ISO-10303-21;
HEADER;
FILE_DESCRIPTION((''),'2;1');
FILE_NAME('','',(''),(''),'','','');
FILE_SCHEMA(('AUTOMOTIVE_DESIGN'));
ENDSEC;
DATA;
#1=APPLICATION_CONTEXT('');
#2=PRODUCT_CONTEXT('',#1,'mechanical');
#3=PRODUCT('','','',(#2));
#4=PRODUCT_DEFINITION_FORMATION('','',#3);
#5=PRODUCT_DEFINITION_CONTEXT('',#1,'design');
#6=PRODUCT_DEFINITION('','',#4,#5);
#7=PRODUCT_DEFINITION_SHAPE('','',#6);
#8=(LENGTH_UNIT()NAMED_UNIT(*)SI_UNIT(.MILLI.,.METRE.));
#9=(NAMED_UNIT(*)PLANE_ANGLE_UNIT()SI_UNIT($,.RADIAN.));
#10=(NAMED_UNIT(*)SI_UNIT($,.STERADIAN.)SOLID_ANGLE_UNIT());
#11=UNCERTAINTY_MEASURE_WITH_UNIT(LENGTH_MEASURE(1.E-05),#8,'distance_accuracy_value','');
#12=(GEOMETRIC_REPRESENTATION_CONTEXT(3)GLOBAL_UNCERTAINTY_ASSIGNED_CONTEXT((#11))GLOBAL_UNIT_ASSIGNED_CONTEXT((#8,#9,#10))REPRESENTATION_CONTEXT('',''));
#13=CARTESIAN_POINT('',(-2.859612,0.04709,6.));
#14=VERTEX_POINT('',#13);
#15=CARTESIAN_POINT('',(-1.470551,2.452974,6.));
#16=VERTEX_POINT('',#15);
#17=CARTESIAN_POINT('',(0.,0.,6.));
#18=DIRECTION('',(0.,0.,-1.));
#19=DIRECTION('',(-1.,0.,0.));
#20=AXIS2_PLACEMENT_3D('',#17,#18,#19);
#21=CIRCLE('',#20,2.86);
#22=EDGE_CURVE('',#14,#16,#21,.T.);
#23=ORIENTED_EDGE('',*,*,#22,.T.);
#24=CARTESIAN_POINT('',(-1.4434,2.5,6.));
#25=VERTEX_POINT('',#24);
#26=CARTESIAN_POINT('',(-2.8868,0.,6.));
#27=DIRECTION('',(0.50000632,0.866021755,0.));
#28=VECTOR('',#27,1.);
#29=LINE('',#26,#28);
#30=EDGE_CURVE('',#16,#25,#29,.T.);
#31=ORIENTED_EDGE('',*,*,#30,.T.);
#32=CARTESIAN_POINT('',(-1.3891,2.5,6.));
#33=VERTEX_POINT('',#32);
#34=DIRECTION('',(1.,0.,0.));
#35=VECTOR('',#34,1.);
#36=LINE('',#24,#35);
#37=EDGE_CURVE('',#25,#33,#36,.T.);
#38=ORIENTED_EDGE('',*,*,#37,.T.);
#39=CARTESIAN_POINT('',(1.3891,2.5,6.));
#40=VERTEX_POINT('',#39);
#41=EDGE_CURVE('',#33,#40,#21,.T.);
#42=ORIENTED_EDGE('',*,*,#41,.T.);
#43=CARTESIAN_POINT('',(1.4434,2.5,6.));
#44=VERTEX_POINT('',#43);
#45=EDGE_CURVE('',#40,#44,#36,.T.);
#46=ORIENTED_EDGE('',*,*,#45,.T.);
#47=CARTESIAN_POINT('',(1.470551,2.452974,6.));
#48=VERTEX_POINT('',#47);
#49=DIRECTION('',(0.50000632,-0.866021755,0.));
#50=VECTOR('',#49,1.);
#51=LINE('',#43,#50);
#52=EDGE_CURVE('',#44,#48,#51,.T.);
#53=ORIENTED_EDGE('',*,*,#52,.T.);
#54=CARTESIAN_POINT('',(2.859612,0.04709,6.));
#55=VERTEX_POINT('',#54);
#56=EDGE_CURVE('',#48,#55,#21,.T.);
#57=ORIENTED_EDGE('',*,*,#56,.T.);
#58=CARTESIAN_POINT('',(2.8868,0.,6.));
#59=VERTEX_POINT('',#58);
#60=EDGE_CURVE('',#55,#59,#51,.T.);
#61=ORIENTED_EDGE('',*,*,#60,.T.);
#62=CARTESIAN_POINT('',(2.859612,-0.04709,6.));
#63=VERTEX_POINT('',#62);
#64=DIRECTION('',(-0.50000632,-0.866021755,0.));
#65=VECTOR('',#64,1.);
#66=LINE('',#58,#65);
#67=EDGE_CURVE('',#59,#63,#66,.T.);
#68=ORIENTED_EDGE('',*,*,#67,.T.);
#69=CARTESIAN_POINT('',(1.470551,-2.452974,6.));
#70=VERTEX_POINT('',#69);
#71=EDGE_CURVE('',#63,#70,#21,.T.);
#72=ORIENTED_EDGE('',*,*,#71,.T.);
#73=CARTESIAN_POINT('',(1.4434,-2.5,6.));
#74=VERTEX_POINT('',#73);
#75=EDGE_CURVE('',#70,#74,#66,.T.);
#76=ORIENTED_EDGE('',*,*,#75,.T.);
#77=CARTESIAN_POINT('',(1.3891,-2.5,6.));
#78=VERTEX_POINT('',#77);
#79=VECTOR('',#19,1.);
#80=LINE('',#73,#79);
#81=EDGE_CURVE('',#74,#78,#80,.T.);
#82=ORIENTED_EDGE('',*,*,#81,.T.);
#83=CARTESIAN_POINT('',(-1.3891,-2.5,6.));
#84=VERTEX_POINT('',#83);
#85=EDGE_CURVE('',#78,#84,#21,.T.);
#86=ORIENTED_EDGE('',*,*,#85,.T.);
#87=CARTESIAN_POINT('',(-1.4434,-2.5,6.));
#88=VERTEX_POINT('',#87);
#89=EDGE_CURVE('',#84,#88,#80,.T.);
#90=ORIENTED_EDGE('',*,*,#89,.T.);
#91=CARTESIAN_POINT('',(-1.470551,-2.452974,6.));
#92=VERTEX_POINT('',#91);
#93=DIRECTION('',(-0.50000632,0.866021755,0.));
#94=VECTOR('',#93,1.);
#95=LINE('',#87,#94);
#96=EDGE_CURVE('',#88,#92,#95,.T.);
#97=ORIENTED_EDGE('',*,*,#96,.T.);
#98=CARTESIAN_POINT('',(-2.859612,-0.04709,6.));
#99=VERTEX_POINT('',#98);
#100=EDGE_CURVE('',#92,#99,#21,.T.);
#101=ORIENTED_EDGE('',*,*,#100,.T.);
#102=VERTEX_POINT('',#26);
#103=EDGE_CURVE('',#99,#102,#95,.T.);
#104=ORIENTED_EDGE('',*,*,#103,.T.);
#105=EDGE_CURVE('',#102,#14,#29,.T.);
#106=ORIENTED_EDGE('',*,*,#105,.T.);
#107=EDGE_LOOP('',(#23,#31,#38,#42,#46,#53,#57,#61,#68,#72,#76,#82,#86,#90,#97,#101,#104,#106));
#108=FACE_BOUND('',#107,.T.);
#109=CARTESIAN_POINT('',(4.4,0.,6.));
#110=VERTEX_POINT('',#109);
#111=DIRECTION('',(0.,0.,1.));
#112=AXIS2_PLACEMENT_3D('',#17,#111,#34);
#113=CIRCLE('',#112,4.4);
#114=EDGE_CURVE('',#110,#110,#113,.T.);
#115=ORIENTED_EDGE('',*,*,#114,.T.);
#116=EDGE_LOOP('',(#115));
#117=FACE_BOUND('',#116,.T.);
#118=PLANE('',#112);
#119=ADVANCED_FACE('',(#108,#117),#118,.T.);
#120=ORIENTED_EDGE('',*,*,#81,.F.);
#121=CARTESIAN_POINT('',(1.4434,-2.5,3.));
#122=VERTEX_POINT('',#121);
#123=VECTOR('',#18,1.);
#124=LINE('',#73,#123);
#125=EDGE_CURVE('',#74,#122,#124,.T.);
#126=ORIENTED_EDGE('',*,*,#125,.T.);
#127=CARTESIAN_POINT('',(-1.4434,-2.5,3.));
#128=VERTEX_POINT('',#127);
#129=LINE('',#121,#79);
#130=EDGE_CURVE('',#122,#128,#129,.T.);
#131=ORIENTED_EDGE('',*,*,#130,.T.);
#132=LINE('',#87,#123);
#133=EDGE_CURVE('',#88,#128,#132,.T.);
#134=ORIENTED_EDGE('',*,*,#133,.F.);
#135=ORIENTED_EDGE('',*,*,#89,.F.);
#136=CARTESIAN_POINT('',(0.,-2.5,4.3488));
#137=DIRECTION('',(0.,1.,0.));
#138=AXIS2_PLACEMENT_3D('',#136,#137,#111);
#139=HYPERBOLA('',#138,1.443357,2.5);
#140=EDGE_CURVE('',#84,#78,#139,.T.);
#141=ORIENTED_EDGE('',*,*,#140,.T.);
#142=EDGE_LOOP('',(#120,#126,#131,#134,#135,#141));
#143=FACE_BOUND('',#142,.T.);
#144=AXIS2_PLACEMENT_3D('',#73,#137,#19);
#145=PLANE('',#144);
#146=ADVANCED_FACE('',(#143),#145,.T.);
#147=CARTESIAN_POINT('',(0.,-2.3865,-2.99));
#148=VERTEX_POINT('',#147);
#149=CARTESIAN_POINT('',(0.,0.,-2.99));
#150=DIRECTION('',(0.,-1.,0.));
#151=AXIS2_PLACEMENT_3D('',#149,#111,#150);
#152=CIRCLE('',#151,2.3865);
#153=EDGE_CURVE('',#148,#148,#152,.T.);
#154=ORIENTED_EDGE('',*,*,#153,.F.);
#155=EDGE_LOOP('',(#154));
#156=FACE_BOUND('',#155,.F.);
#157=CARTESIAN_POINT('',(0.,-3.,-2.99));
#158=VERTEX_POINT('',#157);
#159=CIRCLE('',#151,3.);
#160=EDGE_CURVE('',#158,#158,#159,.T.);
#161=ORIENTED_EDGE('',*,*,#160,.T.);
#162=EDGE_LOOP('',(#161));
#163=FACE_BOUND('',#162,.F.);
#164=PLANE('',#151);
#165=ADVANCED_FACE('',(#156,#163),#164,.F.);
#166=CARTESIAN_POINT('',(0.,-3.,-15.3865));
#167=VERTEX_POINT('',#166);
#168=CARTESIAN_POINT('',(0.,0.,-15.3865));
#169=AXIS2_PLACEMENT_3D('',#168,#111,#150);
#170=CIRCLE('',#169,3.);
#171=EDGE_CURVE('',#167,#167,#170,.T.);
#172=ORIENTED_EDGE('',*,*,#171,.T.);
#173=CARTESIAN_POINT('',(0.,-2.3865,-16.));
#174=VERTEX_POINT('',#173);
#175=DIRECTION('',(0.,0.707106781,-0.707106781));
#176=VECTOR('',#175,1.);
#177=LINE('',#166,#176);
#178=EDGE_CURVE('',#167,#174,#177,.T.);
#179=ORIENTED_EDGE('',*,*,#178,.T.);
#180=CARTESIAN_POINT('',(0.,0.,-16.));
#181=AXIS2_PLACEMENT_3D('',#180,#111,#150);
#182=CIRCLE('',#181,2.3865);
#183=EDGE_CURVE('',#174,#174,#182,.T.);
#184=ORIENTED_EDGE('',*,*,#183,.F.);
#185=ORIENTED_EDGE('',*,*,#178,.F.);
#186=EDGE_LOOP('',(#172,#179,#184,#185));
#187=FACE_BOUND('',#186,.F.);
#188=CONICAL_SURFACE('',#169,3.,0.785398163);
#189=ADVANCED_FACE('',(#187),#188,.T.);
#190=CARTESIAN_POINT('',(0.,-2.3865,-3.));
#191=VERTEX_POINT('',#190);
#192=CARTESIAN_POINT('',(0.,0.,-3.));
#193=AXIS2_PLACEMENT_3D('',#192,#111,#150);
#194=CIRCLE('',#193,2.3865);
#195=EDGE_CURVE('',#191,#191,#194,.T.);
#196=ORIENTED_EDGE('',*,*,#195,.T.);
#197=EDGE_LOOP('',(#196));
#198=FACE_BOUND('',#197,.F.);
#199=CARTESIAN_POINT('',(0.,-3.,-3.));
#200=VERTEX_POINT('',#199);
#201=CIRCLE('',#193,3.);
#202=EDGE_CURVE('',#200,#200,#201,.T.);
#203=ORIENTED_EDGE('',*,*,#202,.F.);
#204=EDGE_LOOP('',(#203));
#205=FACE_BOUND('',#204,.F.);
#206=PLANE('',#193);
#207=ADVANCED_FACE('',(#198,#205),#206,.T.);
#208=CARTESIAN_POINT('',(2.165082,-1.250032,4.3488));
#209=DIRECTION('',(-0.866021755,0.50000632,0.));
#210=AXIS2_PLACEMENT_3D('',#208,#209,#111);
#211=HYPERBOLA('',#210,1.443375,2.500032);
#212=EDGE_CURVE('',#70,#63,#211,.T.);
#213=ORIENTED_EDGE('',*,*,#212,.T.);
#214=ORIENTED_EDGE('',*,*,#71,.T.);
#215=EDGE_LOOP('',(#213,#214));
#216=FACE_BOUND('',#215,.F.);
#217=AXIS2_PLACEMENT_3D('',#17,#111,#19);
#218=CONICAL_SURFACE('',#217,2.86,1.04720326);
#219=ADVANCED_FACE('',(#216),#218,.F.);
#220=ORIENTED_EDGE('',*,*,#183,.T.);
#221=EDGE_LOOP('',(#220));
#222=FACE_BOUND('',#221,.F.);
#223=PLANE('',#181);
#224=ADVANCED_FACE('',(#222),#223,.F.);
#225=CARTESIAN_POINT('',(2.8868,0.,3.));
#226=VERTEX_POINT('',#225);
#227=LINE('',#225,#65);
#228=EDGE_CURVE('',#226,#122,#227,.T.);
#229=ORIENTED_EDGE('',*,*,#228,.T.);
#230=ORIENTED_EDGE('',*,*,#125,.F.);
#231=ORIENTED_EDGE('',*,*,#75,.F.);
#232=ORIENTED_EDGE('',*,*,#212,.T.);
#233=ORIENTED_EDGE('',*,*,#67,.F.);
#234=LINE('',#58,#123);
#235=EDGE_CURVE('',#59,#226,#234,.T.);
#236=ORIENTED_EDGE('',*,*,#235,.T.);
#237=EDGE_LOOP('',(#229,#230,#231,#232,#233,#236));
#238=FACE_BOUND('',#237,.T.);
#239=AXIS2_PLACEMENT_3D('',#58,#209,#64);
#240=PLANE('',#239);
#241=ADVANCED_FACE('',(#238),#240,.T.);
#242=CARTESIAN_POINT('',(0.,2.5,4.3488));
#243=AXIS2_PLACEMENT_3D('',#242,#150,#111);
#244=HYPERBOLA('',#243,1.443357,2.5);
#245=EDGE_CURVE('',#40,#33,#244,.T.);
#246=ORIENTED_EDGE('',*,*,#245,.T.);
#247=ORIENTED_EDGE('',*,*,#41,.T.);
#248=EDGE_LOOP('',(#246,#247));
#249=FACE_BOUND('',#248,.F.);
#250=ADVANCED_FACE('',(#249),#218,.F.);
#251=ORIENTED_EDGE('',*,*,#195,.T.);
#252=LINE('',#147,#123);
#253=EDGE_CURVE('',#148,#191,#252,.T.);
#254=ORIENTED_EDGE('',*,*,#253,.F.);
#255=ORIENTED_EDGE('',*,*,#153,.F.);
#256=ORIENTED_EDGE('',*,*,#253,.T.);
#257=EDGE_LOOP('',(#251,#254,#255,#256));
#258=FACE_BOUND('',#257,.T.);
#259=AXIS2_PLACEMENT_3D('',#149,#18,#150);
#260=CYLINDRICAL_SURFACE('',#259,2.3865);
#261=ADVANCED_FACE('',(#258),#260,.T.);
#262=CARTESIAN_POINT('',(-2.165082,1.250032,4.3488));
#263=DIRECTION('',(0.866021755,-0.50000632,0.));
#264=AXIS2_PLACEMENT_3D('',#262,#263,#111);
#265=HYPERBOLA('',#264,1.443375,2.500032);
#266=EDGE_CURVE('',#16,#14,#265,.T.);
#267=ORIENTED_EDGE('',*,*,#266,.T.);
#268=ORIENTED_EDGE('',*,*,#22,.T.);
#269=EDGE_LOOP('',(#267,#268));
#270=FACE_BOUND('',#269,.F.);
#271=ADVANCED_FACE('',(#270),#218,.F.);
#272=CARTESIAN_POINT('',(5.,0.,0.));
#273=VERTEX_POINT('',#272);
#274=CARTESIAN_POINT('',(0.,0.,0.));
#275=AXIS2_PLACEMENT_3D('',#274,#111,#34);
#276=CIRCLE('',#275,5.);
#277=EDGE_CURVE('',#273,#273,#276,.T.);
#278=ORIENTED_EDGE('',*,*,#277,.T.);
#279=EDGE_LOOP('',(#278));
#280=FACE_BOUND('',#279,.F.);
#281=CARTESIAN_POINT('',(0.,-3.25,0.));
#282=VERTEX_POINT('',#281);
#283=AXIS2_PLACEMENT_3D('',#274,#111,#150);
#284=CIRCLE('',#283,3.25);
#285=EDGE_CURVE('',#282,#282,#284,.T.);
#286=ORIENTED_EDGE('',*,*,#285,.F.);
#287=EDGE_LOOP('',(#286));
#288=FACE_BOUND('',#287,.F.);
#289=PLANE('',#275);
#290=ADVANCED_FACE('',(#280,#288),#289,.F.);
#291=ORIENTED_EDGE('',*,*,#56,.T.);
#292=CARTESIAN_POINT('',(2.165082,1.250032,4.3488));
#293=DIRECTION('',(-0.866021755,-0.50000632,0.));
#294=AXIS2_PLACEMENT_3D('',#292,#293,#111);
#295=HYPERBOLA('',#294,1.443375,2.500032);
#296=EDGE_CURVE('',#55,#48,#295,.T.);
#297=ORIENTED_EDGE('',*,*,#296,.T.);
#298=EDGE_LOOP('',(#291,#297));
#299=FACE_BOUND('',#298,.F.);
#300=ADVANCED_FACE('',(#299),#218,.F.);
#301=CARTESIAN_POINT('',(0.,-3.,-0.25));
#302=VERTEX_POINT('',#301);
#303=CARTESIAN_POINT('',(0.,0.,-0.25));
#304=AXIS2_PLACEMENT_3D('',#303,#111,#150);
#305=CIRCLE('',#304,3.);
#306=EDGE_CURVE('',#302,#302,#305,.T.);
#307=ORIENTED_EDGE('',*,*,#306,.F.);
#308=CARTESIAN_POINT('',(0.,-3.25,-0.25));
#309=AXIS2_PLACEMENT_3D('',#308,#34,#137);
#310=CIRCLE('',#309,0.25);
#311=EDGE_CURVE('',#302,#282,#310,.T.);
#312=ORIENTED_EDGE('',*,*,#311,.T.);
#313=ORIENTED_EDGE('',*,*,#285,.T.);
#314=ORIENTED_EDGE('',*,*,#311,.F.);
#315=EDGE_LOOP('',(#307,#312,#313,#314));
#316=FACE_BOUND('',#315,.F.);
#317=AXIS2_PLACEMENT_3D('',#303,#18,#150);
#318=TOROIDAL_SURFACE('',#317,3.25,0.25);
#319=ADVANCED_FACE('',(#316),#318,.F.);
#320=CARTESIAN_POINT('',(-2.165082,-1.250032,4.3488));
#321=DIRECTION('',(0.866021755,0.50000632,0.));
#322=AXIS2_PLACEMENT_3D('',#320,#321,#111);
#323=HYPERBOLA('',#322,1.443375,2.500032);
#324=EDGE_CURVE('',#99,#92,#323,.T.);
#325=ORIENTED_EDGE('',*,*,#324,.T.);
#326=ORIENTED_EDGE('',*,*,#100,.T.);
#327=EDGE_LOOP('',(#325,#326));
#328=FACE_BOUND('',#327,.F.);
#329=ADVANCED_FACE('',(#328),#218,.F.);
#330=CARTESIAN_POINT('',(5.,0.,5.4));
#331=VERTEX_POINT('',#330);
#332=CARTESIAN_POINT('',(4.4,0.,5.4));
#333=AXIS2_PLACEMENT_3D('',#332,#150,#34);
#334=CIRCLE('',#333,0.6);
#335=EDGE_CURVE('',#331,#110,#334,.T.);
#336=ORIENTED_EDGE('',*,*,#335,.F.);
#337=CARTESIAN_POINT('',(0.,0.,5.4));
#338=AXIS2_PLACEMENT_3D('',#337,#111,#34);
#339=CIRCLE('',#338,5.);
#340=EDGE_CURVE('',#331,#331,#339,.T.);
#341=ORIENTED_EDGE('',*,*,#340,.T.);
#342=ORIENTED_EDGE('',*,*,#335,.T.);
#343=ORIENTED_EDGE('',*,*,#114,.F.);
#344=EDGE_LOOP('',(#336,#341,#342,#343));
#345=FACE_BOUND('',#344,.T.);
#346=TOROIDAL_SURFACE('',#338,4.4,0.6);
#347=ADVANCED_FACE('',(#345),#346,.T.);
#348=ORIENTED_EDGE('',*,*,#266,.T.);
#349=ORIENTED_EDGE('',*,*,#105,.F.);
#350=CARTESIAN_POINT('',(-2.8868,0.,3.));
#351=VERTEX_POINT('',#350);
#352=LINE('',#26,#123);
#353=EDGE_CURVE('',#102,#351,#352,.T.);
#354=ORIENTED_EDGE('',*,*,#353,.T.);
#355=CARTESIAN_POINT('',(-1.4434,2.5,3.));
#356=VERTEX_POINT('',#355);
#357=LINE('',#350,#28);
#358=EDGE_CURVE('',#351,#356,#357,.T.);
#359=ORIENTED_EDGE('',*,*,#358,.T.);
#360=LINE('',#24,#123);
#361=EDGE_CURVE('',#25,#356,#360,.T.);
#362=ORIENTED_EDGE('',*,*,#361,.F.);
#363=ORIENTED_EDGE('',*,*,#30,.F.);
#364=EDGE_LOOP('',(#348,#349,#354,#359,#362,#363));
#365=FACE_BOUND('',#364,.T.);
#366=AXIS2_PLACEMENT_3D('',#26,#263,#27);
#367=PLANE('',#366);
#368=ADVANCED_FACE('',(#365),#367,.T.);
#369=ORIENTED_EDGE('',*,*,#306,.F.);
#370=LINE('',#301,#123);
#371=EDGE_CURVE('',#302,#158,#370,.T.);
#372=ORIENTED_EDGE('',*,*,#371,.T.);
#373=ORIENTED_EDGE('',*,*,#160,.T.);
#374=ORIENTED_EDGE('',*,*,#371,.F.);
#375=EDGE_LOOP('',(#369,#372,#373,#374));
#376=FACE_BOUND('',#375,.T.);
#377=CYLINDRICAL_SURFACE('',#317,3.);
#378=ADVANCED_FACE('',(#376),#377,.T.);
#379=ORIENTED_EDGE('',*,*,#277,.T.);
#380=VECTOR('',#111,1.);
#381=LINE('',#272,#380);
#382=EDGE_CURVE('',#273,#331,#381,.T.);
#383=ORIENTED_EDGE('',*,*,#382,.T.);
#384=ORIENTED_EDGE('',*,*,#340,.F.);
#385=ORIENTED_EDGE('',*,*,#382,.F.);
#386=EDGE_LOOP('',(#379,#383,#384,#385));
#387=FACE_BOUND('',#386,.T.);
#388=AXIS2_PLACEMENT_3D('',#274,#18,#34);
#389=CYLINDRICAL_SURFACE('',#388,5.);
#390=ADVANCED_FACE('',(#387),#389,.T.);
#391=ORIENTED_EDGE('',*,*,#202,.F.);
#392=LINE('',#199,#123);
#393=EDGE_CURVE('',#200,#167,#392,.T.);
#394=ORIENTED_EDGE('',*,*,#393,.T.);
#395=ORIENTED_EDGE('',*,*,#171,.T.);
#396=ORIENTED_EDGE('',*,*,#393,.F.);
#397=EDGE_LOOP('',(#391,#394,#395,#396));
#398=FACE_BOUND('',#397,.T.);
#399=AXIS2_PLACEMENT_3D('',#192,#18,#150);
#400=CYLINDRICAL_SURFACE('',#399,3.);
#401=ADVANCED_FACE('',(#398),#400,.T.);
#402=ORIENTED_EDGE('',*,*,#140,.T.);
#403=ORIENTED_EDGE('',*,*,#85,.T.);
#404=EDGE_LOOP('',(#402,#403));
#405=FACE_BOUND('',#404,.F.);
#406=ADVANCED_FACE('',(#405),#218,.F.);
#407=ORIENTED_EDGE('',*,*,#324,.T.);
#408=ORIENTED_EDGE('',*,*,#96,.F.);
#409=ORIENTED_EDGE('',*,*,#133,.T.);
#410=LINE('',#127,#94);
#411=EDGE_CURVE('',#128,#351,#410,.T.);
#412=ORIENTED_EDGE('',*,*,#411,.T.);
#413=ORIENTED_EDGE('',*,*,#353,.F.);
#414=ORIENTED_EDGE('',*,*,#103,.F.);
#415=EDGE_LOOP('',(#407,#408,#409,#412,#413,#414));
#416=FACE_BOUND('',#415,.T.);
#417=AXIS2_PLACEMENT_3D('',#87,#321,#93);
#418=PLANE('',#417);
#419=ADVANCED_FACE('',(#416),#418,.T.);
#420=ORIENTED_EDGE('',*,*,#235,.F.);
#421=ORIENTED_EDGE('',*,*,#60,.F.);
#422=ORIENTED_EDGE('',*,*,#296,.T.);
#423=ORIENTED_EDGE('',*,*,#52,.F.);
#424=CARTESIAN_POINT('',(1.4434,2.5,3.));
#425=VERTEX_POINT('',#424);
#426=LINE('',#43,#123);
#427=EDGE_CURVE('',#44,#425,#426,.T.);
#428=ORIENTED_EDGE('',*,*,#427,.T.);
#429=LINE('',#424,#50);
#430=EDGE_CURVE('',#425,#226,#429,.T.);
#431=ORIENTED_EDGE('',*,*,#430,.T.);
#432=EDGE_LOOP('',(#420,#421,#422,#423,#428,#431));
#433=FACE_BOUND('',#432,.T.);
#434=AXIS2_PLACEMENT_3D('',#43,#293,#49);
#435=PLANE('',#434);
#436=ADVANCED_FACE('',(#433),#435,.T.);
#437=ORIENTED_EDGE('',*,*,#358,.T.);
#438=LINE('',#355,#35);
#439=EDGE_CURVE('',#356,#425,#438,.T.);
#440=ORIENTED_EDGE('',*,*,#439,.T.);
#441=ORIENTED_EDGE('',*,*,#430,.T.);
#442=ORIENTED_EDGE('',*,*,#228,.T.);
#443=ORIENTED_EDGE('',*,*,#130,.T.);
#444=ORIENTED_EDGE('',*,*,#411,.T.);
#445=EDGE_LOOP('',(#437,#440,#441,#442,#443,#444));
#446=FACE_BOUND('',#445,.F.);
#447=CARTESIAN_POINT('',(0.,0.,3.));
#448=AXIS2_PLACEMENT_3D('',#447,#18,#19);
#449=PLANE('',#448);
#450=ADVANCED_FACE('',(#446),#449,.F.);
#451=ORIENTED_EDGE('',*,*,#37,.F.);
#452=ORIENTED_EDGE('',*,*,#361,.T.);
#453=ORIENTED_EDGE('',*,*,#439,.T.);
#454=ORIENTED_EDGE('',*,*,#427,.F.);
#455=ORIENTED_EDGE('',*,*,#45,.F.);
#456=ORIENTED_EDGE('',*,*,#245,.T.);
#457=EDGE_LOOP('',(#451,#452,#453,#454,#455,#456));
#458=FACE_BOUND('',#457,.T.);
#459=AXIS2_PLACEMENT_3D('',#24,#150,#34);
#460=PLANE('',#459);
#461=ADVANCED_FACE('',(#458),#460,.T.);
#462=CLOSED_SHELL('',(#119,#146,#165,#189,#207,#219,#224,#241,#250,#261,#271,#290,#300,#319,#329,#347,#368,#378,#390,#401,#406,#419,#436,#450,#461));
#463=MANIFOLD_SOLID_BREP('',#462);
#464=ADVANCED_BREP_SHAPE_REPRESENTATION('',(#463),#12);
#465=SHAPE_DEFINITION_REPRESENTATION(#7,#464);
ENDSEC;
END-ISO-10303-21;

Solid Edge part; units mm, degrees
sketch "Sketch1" plane through (0, 0, 0) normal (0, 0, 1) x (1, 0, 0)
  circle A0 centre (0, 0) radius 5
extrude "Protrusion1" add sketch "Sketch1" along normal blind 6
sketch "Sketch2" plane through (0, 0, 6) normal (0, 0, 1) x (0, 1, 0)
  line L0 (0, 2.8868) -> (2.5, 1.4434)
  line L1 (2.5, 1.4434) -> (2.5, -1.4434)
  line L2 (2.5, -1.4434) -> (0, -2.8868)
  line L3 (0, -2.8868) -> (-2.5, -1.4434)
  line L4 (-2.5, -1.4434) -> (-2.5, 1.4434)
  line L5 (-2.5, 1.4434) -> (0, 2.8868)
extrude "Cutout1" cut sketch "Sketch2" against normal blind 3
fillet "Round1" radius 0.6 1 edges at (-5, 0, 6)
sketch "Sketch3" plane through (0, 0, 0) normal (1, 0, 0) x (0, 1, 0)
  line L0 (-2.3865, -16) -> (0, -16)
  line L1 (-3, -15.3865) -> (-2.3865, -16)
  line L2 (-3, -3) -> (-3, -15.3865)
  line L3 (-2.3865, -3) -> (-3, -3)
  line L4 (-2.3865, -2.99) -> (-2.3865, -3)
  line L5 (-3, -2.99) -> (-2.3865, -2.99)
  line L6 (-3, -0.25) -> (-3, -2.99)
  arc A0 (-3, -0.25) -> (-3.25, 0) centre (-3.25, -0.25) ccw
  dimension "D1" = 3
  dimension "D2" = 0.01
  dimension "D3" = 0.25
  dimension "D4" = 16
revolve "RevolvedProtrusion1" add sketch "Sketch3" angle 360 about axis through (0, 0, -60.325) along (0, 0, 1) material side at (0, -1.1932, -15.95)
cosmetic_thread "Thread1"
sketch "Sketch4" plane through (0, 0, 0) normal (0, -1, 0) x (1, 0, 0)
  line L0 (-2.86, 6) -> (0, 4.3488)
revolve "RevolvedCutout1" cut sketch "Sketch4" angle 360 about axis through (0, 0, 57.15) along (0, 0, -1) material side at (-1.405, 0, 5.2177)
properties material "Steel"
